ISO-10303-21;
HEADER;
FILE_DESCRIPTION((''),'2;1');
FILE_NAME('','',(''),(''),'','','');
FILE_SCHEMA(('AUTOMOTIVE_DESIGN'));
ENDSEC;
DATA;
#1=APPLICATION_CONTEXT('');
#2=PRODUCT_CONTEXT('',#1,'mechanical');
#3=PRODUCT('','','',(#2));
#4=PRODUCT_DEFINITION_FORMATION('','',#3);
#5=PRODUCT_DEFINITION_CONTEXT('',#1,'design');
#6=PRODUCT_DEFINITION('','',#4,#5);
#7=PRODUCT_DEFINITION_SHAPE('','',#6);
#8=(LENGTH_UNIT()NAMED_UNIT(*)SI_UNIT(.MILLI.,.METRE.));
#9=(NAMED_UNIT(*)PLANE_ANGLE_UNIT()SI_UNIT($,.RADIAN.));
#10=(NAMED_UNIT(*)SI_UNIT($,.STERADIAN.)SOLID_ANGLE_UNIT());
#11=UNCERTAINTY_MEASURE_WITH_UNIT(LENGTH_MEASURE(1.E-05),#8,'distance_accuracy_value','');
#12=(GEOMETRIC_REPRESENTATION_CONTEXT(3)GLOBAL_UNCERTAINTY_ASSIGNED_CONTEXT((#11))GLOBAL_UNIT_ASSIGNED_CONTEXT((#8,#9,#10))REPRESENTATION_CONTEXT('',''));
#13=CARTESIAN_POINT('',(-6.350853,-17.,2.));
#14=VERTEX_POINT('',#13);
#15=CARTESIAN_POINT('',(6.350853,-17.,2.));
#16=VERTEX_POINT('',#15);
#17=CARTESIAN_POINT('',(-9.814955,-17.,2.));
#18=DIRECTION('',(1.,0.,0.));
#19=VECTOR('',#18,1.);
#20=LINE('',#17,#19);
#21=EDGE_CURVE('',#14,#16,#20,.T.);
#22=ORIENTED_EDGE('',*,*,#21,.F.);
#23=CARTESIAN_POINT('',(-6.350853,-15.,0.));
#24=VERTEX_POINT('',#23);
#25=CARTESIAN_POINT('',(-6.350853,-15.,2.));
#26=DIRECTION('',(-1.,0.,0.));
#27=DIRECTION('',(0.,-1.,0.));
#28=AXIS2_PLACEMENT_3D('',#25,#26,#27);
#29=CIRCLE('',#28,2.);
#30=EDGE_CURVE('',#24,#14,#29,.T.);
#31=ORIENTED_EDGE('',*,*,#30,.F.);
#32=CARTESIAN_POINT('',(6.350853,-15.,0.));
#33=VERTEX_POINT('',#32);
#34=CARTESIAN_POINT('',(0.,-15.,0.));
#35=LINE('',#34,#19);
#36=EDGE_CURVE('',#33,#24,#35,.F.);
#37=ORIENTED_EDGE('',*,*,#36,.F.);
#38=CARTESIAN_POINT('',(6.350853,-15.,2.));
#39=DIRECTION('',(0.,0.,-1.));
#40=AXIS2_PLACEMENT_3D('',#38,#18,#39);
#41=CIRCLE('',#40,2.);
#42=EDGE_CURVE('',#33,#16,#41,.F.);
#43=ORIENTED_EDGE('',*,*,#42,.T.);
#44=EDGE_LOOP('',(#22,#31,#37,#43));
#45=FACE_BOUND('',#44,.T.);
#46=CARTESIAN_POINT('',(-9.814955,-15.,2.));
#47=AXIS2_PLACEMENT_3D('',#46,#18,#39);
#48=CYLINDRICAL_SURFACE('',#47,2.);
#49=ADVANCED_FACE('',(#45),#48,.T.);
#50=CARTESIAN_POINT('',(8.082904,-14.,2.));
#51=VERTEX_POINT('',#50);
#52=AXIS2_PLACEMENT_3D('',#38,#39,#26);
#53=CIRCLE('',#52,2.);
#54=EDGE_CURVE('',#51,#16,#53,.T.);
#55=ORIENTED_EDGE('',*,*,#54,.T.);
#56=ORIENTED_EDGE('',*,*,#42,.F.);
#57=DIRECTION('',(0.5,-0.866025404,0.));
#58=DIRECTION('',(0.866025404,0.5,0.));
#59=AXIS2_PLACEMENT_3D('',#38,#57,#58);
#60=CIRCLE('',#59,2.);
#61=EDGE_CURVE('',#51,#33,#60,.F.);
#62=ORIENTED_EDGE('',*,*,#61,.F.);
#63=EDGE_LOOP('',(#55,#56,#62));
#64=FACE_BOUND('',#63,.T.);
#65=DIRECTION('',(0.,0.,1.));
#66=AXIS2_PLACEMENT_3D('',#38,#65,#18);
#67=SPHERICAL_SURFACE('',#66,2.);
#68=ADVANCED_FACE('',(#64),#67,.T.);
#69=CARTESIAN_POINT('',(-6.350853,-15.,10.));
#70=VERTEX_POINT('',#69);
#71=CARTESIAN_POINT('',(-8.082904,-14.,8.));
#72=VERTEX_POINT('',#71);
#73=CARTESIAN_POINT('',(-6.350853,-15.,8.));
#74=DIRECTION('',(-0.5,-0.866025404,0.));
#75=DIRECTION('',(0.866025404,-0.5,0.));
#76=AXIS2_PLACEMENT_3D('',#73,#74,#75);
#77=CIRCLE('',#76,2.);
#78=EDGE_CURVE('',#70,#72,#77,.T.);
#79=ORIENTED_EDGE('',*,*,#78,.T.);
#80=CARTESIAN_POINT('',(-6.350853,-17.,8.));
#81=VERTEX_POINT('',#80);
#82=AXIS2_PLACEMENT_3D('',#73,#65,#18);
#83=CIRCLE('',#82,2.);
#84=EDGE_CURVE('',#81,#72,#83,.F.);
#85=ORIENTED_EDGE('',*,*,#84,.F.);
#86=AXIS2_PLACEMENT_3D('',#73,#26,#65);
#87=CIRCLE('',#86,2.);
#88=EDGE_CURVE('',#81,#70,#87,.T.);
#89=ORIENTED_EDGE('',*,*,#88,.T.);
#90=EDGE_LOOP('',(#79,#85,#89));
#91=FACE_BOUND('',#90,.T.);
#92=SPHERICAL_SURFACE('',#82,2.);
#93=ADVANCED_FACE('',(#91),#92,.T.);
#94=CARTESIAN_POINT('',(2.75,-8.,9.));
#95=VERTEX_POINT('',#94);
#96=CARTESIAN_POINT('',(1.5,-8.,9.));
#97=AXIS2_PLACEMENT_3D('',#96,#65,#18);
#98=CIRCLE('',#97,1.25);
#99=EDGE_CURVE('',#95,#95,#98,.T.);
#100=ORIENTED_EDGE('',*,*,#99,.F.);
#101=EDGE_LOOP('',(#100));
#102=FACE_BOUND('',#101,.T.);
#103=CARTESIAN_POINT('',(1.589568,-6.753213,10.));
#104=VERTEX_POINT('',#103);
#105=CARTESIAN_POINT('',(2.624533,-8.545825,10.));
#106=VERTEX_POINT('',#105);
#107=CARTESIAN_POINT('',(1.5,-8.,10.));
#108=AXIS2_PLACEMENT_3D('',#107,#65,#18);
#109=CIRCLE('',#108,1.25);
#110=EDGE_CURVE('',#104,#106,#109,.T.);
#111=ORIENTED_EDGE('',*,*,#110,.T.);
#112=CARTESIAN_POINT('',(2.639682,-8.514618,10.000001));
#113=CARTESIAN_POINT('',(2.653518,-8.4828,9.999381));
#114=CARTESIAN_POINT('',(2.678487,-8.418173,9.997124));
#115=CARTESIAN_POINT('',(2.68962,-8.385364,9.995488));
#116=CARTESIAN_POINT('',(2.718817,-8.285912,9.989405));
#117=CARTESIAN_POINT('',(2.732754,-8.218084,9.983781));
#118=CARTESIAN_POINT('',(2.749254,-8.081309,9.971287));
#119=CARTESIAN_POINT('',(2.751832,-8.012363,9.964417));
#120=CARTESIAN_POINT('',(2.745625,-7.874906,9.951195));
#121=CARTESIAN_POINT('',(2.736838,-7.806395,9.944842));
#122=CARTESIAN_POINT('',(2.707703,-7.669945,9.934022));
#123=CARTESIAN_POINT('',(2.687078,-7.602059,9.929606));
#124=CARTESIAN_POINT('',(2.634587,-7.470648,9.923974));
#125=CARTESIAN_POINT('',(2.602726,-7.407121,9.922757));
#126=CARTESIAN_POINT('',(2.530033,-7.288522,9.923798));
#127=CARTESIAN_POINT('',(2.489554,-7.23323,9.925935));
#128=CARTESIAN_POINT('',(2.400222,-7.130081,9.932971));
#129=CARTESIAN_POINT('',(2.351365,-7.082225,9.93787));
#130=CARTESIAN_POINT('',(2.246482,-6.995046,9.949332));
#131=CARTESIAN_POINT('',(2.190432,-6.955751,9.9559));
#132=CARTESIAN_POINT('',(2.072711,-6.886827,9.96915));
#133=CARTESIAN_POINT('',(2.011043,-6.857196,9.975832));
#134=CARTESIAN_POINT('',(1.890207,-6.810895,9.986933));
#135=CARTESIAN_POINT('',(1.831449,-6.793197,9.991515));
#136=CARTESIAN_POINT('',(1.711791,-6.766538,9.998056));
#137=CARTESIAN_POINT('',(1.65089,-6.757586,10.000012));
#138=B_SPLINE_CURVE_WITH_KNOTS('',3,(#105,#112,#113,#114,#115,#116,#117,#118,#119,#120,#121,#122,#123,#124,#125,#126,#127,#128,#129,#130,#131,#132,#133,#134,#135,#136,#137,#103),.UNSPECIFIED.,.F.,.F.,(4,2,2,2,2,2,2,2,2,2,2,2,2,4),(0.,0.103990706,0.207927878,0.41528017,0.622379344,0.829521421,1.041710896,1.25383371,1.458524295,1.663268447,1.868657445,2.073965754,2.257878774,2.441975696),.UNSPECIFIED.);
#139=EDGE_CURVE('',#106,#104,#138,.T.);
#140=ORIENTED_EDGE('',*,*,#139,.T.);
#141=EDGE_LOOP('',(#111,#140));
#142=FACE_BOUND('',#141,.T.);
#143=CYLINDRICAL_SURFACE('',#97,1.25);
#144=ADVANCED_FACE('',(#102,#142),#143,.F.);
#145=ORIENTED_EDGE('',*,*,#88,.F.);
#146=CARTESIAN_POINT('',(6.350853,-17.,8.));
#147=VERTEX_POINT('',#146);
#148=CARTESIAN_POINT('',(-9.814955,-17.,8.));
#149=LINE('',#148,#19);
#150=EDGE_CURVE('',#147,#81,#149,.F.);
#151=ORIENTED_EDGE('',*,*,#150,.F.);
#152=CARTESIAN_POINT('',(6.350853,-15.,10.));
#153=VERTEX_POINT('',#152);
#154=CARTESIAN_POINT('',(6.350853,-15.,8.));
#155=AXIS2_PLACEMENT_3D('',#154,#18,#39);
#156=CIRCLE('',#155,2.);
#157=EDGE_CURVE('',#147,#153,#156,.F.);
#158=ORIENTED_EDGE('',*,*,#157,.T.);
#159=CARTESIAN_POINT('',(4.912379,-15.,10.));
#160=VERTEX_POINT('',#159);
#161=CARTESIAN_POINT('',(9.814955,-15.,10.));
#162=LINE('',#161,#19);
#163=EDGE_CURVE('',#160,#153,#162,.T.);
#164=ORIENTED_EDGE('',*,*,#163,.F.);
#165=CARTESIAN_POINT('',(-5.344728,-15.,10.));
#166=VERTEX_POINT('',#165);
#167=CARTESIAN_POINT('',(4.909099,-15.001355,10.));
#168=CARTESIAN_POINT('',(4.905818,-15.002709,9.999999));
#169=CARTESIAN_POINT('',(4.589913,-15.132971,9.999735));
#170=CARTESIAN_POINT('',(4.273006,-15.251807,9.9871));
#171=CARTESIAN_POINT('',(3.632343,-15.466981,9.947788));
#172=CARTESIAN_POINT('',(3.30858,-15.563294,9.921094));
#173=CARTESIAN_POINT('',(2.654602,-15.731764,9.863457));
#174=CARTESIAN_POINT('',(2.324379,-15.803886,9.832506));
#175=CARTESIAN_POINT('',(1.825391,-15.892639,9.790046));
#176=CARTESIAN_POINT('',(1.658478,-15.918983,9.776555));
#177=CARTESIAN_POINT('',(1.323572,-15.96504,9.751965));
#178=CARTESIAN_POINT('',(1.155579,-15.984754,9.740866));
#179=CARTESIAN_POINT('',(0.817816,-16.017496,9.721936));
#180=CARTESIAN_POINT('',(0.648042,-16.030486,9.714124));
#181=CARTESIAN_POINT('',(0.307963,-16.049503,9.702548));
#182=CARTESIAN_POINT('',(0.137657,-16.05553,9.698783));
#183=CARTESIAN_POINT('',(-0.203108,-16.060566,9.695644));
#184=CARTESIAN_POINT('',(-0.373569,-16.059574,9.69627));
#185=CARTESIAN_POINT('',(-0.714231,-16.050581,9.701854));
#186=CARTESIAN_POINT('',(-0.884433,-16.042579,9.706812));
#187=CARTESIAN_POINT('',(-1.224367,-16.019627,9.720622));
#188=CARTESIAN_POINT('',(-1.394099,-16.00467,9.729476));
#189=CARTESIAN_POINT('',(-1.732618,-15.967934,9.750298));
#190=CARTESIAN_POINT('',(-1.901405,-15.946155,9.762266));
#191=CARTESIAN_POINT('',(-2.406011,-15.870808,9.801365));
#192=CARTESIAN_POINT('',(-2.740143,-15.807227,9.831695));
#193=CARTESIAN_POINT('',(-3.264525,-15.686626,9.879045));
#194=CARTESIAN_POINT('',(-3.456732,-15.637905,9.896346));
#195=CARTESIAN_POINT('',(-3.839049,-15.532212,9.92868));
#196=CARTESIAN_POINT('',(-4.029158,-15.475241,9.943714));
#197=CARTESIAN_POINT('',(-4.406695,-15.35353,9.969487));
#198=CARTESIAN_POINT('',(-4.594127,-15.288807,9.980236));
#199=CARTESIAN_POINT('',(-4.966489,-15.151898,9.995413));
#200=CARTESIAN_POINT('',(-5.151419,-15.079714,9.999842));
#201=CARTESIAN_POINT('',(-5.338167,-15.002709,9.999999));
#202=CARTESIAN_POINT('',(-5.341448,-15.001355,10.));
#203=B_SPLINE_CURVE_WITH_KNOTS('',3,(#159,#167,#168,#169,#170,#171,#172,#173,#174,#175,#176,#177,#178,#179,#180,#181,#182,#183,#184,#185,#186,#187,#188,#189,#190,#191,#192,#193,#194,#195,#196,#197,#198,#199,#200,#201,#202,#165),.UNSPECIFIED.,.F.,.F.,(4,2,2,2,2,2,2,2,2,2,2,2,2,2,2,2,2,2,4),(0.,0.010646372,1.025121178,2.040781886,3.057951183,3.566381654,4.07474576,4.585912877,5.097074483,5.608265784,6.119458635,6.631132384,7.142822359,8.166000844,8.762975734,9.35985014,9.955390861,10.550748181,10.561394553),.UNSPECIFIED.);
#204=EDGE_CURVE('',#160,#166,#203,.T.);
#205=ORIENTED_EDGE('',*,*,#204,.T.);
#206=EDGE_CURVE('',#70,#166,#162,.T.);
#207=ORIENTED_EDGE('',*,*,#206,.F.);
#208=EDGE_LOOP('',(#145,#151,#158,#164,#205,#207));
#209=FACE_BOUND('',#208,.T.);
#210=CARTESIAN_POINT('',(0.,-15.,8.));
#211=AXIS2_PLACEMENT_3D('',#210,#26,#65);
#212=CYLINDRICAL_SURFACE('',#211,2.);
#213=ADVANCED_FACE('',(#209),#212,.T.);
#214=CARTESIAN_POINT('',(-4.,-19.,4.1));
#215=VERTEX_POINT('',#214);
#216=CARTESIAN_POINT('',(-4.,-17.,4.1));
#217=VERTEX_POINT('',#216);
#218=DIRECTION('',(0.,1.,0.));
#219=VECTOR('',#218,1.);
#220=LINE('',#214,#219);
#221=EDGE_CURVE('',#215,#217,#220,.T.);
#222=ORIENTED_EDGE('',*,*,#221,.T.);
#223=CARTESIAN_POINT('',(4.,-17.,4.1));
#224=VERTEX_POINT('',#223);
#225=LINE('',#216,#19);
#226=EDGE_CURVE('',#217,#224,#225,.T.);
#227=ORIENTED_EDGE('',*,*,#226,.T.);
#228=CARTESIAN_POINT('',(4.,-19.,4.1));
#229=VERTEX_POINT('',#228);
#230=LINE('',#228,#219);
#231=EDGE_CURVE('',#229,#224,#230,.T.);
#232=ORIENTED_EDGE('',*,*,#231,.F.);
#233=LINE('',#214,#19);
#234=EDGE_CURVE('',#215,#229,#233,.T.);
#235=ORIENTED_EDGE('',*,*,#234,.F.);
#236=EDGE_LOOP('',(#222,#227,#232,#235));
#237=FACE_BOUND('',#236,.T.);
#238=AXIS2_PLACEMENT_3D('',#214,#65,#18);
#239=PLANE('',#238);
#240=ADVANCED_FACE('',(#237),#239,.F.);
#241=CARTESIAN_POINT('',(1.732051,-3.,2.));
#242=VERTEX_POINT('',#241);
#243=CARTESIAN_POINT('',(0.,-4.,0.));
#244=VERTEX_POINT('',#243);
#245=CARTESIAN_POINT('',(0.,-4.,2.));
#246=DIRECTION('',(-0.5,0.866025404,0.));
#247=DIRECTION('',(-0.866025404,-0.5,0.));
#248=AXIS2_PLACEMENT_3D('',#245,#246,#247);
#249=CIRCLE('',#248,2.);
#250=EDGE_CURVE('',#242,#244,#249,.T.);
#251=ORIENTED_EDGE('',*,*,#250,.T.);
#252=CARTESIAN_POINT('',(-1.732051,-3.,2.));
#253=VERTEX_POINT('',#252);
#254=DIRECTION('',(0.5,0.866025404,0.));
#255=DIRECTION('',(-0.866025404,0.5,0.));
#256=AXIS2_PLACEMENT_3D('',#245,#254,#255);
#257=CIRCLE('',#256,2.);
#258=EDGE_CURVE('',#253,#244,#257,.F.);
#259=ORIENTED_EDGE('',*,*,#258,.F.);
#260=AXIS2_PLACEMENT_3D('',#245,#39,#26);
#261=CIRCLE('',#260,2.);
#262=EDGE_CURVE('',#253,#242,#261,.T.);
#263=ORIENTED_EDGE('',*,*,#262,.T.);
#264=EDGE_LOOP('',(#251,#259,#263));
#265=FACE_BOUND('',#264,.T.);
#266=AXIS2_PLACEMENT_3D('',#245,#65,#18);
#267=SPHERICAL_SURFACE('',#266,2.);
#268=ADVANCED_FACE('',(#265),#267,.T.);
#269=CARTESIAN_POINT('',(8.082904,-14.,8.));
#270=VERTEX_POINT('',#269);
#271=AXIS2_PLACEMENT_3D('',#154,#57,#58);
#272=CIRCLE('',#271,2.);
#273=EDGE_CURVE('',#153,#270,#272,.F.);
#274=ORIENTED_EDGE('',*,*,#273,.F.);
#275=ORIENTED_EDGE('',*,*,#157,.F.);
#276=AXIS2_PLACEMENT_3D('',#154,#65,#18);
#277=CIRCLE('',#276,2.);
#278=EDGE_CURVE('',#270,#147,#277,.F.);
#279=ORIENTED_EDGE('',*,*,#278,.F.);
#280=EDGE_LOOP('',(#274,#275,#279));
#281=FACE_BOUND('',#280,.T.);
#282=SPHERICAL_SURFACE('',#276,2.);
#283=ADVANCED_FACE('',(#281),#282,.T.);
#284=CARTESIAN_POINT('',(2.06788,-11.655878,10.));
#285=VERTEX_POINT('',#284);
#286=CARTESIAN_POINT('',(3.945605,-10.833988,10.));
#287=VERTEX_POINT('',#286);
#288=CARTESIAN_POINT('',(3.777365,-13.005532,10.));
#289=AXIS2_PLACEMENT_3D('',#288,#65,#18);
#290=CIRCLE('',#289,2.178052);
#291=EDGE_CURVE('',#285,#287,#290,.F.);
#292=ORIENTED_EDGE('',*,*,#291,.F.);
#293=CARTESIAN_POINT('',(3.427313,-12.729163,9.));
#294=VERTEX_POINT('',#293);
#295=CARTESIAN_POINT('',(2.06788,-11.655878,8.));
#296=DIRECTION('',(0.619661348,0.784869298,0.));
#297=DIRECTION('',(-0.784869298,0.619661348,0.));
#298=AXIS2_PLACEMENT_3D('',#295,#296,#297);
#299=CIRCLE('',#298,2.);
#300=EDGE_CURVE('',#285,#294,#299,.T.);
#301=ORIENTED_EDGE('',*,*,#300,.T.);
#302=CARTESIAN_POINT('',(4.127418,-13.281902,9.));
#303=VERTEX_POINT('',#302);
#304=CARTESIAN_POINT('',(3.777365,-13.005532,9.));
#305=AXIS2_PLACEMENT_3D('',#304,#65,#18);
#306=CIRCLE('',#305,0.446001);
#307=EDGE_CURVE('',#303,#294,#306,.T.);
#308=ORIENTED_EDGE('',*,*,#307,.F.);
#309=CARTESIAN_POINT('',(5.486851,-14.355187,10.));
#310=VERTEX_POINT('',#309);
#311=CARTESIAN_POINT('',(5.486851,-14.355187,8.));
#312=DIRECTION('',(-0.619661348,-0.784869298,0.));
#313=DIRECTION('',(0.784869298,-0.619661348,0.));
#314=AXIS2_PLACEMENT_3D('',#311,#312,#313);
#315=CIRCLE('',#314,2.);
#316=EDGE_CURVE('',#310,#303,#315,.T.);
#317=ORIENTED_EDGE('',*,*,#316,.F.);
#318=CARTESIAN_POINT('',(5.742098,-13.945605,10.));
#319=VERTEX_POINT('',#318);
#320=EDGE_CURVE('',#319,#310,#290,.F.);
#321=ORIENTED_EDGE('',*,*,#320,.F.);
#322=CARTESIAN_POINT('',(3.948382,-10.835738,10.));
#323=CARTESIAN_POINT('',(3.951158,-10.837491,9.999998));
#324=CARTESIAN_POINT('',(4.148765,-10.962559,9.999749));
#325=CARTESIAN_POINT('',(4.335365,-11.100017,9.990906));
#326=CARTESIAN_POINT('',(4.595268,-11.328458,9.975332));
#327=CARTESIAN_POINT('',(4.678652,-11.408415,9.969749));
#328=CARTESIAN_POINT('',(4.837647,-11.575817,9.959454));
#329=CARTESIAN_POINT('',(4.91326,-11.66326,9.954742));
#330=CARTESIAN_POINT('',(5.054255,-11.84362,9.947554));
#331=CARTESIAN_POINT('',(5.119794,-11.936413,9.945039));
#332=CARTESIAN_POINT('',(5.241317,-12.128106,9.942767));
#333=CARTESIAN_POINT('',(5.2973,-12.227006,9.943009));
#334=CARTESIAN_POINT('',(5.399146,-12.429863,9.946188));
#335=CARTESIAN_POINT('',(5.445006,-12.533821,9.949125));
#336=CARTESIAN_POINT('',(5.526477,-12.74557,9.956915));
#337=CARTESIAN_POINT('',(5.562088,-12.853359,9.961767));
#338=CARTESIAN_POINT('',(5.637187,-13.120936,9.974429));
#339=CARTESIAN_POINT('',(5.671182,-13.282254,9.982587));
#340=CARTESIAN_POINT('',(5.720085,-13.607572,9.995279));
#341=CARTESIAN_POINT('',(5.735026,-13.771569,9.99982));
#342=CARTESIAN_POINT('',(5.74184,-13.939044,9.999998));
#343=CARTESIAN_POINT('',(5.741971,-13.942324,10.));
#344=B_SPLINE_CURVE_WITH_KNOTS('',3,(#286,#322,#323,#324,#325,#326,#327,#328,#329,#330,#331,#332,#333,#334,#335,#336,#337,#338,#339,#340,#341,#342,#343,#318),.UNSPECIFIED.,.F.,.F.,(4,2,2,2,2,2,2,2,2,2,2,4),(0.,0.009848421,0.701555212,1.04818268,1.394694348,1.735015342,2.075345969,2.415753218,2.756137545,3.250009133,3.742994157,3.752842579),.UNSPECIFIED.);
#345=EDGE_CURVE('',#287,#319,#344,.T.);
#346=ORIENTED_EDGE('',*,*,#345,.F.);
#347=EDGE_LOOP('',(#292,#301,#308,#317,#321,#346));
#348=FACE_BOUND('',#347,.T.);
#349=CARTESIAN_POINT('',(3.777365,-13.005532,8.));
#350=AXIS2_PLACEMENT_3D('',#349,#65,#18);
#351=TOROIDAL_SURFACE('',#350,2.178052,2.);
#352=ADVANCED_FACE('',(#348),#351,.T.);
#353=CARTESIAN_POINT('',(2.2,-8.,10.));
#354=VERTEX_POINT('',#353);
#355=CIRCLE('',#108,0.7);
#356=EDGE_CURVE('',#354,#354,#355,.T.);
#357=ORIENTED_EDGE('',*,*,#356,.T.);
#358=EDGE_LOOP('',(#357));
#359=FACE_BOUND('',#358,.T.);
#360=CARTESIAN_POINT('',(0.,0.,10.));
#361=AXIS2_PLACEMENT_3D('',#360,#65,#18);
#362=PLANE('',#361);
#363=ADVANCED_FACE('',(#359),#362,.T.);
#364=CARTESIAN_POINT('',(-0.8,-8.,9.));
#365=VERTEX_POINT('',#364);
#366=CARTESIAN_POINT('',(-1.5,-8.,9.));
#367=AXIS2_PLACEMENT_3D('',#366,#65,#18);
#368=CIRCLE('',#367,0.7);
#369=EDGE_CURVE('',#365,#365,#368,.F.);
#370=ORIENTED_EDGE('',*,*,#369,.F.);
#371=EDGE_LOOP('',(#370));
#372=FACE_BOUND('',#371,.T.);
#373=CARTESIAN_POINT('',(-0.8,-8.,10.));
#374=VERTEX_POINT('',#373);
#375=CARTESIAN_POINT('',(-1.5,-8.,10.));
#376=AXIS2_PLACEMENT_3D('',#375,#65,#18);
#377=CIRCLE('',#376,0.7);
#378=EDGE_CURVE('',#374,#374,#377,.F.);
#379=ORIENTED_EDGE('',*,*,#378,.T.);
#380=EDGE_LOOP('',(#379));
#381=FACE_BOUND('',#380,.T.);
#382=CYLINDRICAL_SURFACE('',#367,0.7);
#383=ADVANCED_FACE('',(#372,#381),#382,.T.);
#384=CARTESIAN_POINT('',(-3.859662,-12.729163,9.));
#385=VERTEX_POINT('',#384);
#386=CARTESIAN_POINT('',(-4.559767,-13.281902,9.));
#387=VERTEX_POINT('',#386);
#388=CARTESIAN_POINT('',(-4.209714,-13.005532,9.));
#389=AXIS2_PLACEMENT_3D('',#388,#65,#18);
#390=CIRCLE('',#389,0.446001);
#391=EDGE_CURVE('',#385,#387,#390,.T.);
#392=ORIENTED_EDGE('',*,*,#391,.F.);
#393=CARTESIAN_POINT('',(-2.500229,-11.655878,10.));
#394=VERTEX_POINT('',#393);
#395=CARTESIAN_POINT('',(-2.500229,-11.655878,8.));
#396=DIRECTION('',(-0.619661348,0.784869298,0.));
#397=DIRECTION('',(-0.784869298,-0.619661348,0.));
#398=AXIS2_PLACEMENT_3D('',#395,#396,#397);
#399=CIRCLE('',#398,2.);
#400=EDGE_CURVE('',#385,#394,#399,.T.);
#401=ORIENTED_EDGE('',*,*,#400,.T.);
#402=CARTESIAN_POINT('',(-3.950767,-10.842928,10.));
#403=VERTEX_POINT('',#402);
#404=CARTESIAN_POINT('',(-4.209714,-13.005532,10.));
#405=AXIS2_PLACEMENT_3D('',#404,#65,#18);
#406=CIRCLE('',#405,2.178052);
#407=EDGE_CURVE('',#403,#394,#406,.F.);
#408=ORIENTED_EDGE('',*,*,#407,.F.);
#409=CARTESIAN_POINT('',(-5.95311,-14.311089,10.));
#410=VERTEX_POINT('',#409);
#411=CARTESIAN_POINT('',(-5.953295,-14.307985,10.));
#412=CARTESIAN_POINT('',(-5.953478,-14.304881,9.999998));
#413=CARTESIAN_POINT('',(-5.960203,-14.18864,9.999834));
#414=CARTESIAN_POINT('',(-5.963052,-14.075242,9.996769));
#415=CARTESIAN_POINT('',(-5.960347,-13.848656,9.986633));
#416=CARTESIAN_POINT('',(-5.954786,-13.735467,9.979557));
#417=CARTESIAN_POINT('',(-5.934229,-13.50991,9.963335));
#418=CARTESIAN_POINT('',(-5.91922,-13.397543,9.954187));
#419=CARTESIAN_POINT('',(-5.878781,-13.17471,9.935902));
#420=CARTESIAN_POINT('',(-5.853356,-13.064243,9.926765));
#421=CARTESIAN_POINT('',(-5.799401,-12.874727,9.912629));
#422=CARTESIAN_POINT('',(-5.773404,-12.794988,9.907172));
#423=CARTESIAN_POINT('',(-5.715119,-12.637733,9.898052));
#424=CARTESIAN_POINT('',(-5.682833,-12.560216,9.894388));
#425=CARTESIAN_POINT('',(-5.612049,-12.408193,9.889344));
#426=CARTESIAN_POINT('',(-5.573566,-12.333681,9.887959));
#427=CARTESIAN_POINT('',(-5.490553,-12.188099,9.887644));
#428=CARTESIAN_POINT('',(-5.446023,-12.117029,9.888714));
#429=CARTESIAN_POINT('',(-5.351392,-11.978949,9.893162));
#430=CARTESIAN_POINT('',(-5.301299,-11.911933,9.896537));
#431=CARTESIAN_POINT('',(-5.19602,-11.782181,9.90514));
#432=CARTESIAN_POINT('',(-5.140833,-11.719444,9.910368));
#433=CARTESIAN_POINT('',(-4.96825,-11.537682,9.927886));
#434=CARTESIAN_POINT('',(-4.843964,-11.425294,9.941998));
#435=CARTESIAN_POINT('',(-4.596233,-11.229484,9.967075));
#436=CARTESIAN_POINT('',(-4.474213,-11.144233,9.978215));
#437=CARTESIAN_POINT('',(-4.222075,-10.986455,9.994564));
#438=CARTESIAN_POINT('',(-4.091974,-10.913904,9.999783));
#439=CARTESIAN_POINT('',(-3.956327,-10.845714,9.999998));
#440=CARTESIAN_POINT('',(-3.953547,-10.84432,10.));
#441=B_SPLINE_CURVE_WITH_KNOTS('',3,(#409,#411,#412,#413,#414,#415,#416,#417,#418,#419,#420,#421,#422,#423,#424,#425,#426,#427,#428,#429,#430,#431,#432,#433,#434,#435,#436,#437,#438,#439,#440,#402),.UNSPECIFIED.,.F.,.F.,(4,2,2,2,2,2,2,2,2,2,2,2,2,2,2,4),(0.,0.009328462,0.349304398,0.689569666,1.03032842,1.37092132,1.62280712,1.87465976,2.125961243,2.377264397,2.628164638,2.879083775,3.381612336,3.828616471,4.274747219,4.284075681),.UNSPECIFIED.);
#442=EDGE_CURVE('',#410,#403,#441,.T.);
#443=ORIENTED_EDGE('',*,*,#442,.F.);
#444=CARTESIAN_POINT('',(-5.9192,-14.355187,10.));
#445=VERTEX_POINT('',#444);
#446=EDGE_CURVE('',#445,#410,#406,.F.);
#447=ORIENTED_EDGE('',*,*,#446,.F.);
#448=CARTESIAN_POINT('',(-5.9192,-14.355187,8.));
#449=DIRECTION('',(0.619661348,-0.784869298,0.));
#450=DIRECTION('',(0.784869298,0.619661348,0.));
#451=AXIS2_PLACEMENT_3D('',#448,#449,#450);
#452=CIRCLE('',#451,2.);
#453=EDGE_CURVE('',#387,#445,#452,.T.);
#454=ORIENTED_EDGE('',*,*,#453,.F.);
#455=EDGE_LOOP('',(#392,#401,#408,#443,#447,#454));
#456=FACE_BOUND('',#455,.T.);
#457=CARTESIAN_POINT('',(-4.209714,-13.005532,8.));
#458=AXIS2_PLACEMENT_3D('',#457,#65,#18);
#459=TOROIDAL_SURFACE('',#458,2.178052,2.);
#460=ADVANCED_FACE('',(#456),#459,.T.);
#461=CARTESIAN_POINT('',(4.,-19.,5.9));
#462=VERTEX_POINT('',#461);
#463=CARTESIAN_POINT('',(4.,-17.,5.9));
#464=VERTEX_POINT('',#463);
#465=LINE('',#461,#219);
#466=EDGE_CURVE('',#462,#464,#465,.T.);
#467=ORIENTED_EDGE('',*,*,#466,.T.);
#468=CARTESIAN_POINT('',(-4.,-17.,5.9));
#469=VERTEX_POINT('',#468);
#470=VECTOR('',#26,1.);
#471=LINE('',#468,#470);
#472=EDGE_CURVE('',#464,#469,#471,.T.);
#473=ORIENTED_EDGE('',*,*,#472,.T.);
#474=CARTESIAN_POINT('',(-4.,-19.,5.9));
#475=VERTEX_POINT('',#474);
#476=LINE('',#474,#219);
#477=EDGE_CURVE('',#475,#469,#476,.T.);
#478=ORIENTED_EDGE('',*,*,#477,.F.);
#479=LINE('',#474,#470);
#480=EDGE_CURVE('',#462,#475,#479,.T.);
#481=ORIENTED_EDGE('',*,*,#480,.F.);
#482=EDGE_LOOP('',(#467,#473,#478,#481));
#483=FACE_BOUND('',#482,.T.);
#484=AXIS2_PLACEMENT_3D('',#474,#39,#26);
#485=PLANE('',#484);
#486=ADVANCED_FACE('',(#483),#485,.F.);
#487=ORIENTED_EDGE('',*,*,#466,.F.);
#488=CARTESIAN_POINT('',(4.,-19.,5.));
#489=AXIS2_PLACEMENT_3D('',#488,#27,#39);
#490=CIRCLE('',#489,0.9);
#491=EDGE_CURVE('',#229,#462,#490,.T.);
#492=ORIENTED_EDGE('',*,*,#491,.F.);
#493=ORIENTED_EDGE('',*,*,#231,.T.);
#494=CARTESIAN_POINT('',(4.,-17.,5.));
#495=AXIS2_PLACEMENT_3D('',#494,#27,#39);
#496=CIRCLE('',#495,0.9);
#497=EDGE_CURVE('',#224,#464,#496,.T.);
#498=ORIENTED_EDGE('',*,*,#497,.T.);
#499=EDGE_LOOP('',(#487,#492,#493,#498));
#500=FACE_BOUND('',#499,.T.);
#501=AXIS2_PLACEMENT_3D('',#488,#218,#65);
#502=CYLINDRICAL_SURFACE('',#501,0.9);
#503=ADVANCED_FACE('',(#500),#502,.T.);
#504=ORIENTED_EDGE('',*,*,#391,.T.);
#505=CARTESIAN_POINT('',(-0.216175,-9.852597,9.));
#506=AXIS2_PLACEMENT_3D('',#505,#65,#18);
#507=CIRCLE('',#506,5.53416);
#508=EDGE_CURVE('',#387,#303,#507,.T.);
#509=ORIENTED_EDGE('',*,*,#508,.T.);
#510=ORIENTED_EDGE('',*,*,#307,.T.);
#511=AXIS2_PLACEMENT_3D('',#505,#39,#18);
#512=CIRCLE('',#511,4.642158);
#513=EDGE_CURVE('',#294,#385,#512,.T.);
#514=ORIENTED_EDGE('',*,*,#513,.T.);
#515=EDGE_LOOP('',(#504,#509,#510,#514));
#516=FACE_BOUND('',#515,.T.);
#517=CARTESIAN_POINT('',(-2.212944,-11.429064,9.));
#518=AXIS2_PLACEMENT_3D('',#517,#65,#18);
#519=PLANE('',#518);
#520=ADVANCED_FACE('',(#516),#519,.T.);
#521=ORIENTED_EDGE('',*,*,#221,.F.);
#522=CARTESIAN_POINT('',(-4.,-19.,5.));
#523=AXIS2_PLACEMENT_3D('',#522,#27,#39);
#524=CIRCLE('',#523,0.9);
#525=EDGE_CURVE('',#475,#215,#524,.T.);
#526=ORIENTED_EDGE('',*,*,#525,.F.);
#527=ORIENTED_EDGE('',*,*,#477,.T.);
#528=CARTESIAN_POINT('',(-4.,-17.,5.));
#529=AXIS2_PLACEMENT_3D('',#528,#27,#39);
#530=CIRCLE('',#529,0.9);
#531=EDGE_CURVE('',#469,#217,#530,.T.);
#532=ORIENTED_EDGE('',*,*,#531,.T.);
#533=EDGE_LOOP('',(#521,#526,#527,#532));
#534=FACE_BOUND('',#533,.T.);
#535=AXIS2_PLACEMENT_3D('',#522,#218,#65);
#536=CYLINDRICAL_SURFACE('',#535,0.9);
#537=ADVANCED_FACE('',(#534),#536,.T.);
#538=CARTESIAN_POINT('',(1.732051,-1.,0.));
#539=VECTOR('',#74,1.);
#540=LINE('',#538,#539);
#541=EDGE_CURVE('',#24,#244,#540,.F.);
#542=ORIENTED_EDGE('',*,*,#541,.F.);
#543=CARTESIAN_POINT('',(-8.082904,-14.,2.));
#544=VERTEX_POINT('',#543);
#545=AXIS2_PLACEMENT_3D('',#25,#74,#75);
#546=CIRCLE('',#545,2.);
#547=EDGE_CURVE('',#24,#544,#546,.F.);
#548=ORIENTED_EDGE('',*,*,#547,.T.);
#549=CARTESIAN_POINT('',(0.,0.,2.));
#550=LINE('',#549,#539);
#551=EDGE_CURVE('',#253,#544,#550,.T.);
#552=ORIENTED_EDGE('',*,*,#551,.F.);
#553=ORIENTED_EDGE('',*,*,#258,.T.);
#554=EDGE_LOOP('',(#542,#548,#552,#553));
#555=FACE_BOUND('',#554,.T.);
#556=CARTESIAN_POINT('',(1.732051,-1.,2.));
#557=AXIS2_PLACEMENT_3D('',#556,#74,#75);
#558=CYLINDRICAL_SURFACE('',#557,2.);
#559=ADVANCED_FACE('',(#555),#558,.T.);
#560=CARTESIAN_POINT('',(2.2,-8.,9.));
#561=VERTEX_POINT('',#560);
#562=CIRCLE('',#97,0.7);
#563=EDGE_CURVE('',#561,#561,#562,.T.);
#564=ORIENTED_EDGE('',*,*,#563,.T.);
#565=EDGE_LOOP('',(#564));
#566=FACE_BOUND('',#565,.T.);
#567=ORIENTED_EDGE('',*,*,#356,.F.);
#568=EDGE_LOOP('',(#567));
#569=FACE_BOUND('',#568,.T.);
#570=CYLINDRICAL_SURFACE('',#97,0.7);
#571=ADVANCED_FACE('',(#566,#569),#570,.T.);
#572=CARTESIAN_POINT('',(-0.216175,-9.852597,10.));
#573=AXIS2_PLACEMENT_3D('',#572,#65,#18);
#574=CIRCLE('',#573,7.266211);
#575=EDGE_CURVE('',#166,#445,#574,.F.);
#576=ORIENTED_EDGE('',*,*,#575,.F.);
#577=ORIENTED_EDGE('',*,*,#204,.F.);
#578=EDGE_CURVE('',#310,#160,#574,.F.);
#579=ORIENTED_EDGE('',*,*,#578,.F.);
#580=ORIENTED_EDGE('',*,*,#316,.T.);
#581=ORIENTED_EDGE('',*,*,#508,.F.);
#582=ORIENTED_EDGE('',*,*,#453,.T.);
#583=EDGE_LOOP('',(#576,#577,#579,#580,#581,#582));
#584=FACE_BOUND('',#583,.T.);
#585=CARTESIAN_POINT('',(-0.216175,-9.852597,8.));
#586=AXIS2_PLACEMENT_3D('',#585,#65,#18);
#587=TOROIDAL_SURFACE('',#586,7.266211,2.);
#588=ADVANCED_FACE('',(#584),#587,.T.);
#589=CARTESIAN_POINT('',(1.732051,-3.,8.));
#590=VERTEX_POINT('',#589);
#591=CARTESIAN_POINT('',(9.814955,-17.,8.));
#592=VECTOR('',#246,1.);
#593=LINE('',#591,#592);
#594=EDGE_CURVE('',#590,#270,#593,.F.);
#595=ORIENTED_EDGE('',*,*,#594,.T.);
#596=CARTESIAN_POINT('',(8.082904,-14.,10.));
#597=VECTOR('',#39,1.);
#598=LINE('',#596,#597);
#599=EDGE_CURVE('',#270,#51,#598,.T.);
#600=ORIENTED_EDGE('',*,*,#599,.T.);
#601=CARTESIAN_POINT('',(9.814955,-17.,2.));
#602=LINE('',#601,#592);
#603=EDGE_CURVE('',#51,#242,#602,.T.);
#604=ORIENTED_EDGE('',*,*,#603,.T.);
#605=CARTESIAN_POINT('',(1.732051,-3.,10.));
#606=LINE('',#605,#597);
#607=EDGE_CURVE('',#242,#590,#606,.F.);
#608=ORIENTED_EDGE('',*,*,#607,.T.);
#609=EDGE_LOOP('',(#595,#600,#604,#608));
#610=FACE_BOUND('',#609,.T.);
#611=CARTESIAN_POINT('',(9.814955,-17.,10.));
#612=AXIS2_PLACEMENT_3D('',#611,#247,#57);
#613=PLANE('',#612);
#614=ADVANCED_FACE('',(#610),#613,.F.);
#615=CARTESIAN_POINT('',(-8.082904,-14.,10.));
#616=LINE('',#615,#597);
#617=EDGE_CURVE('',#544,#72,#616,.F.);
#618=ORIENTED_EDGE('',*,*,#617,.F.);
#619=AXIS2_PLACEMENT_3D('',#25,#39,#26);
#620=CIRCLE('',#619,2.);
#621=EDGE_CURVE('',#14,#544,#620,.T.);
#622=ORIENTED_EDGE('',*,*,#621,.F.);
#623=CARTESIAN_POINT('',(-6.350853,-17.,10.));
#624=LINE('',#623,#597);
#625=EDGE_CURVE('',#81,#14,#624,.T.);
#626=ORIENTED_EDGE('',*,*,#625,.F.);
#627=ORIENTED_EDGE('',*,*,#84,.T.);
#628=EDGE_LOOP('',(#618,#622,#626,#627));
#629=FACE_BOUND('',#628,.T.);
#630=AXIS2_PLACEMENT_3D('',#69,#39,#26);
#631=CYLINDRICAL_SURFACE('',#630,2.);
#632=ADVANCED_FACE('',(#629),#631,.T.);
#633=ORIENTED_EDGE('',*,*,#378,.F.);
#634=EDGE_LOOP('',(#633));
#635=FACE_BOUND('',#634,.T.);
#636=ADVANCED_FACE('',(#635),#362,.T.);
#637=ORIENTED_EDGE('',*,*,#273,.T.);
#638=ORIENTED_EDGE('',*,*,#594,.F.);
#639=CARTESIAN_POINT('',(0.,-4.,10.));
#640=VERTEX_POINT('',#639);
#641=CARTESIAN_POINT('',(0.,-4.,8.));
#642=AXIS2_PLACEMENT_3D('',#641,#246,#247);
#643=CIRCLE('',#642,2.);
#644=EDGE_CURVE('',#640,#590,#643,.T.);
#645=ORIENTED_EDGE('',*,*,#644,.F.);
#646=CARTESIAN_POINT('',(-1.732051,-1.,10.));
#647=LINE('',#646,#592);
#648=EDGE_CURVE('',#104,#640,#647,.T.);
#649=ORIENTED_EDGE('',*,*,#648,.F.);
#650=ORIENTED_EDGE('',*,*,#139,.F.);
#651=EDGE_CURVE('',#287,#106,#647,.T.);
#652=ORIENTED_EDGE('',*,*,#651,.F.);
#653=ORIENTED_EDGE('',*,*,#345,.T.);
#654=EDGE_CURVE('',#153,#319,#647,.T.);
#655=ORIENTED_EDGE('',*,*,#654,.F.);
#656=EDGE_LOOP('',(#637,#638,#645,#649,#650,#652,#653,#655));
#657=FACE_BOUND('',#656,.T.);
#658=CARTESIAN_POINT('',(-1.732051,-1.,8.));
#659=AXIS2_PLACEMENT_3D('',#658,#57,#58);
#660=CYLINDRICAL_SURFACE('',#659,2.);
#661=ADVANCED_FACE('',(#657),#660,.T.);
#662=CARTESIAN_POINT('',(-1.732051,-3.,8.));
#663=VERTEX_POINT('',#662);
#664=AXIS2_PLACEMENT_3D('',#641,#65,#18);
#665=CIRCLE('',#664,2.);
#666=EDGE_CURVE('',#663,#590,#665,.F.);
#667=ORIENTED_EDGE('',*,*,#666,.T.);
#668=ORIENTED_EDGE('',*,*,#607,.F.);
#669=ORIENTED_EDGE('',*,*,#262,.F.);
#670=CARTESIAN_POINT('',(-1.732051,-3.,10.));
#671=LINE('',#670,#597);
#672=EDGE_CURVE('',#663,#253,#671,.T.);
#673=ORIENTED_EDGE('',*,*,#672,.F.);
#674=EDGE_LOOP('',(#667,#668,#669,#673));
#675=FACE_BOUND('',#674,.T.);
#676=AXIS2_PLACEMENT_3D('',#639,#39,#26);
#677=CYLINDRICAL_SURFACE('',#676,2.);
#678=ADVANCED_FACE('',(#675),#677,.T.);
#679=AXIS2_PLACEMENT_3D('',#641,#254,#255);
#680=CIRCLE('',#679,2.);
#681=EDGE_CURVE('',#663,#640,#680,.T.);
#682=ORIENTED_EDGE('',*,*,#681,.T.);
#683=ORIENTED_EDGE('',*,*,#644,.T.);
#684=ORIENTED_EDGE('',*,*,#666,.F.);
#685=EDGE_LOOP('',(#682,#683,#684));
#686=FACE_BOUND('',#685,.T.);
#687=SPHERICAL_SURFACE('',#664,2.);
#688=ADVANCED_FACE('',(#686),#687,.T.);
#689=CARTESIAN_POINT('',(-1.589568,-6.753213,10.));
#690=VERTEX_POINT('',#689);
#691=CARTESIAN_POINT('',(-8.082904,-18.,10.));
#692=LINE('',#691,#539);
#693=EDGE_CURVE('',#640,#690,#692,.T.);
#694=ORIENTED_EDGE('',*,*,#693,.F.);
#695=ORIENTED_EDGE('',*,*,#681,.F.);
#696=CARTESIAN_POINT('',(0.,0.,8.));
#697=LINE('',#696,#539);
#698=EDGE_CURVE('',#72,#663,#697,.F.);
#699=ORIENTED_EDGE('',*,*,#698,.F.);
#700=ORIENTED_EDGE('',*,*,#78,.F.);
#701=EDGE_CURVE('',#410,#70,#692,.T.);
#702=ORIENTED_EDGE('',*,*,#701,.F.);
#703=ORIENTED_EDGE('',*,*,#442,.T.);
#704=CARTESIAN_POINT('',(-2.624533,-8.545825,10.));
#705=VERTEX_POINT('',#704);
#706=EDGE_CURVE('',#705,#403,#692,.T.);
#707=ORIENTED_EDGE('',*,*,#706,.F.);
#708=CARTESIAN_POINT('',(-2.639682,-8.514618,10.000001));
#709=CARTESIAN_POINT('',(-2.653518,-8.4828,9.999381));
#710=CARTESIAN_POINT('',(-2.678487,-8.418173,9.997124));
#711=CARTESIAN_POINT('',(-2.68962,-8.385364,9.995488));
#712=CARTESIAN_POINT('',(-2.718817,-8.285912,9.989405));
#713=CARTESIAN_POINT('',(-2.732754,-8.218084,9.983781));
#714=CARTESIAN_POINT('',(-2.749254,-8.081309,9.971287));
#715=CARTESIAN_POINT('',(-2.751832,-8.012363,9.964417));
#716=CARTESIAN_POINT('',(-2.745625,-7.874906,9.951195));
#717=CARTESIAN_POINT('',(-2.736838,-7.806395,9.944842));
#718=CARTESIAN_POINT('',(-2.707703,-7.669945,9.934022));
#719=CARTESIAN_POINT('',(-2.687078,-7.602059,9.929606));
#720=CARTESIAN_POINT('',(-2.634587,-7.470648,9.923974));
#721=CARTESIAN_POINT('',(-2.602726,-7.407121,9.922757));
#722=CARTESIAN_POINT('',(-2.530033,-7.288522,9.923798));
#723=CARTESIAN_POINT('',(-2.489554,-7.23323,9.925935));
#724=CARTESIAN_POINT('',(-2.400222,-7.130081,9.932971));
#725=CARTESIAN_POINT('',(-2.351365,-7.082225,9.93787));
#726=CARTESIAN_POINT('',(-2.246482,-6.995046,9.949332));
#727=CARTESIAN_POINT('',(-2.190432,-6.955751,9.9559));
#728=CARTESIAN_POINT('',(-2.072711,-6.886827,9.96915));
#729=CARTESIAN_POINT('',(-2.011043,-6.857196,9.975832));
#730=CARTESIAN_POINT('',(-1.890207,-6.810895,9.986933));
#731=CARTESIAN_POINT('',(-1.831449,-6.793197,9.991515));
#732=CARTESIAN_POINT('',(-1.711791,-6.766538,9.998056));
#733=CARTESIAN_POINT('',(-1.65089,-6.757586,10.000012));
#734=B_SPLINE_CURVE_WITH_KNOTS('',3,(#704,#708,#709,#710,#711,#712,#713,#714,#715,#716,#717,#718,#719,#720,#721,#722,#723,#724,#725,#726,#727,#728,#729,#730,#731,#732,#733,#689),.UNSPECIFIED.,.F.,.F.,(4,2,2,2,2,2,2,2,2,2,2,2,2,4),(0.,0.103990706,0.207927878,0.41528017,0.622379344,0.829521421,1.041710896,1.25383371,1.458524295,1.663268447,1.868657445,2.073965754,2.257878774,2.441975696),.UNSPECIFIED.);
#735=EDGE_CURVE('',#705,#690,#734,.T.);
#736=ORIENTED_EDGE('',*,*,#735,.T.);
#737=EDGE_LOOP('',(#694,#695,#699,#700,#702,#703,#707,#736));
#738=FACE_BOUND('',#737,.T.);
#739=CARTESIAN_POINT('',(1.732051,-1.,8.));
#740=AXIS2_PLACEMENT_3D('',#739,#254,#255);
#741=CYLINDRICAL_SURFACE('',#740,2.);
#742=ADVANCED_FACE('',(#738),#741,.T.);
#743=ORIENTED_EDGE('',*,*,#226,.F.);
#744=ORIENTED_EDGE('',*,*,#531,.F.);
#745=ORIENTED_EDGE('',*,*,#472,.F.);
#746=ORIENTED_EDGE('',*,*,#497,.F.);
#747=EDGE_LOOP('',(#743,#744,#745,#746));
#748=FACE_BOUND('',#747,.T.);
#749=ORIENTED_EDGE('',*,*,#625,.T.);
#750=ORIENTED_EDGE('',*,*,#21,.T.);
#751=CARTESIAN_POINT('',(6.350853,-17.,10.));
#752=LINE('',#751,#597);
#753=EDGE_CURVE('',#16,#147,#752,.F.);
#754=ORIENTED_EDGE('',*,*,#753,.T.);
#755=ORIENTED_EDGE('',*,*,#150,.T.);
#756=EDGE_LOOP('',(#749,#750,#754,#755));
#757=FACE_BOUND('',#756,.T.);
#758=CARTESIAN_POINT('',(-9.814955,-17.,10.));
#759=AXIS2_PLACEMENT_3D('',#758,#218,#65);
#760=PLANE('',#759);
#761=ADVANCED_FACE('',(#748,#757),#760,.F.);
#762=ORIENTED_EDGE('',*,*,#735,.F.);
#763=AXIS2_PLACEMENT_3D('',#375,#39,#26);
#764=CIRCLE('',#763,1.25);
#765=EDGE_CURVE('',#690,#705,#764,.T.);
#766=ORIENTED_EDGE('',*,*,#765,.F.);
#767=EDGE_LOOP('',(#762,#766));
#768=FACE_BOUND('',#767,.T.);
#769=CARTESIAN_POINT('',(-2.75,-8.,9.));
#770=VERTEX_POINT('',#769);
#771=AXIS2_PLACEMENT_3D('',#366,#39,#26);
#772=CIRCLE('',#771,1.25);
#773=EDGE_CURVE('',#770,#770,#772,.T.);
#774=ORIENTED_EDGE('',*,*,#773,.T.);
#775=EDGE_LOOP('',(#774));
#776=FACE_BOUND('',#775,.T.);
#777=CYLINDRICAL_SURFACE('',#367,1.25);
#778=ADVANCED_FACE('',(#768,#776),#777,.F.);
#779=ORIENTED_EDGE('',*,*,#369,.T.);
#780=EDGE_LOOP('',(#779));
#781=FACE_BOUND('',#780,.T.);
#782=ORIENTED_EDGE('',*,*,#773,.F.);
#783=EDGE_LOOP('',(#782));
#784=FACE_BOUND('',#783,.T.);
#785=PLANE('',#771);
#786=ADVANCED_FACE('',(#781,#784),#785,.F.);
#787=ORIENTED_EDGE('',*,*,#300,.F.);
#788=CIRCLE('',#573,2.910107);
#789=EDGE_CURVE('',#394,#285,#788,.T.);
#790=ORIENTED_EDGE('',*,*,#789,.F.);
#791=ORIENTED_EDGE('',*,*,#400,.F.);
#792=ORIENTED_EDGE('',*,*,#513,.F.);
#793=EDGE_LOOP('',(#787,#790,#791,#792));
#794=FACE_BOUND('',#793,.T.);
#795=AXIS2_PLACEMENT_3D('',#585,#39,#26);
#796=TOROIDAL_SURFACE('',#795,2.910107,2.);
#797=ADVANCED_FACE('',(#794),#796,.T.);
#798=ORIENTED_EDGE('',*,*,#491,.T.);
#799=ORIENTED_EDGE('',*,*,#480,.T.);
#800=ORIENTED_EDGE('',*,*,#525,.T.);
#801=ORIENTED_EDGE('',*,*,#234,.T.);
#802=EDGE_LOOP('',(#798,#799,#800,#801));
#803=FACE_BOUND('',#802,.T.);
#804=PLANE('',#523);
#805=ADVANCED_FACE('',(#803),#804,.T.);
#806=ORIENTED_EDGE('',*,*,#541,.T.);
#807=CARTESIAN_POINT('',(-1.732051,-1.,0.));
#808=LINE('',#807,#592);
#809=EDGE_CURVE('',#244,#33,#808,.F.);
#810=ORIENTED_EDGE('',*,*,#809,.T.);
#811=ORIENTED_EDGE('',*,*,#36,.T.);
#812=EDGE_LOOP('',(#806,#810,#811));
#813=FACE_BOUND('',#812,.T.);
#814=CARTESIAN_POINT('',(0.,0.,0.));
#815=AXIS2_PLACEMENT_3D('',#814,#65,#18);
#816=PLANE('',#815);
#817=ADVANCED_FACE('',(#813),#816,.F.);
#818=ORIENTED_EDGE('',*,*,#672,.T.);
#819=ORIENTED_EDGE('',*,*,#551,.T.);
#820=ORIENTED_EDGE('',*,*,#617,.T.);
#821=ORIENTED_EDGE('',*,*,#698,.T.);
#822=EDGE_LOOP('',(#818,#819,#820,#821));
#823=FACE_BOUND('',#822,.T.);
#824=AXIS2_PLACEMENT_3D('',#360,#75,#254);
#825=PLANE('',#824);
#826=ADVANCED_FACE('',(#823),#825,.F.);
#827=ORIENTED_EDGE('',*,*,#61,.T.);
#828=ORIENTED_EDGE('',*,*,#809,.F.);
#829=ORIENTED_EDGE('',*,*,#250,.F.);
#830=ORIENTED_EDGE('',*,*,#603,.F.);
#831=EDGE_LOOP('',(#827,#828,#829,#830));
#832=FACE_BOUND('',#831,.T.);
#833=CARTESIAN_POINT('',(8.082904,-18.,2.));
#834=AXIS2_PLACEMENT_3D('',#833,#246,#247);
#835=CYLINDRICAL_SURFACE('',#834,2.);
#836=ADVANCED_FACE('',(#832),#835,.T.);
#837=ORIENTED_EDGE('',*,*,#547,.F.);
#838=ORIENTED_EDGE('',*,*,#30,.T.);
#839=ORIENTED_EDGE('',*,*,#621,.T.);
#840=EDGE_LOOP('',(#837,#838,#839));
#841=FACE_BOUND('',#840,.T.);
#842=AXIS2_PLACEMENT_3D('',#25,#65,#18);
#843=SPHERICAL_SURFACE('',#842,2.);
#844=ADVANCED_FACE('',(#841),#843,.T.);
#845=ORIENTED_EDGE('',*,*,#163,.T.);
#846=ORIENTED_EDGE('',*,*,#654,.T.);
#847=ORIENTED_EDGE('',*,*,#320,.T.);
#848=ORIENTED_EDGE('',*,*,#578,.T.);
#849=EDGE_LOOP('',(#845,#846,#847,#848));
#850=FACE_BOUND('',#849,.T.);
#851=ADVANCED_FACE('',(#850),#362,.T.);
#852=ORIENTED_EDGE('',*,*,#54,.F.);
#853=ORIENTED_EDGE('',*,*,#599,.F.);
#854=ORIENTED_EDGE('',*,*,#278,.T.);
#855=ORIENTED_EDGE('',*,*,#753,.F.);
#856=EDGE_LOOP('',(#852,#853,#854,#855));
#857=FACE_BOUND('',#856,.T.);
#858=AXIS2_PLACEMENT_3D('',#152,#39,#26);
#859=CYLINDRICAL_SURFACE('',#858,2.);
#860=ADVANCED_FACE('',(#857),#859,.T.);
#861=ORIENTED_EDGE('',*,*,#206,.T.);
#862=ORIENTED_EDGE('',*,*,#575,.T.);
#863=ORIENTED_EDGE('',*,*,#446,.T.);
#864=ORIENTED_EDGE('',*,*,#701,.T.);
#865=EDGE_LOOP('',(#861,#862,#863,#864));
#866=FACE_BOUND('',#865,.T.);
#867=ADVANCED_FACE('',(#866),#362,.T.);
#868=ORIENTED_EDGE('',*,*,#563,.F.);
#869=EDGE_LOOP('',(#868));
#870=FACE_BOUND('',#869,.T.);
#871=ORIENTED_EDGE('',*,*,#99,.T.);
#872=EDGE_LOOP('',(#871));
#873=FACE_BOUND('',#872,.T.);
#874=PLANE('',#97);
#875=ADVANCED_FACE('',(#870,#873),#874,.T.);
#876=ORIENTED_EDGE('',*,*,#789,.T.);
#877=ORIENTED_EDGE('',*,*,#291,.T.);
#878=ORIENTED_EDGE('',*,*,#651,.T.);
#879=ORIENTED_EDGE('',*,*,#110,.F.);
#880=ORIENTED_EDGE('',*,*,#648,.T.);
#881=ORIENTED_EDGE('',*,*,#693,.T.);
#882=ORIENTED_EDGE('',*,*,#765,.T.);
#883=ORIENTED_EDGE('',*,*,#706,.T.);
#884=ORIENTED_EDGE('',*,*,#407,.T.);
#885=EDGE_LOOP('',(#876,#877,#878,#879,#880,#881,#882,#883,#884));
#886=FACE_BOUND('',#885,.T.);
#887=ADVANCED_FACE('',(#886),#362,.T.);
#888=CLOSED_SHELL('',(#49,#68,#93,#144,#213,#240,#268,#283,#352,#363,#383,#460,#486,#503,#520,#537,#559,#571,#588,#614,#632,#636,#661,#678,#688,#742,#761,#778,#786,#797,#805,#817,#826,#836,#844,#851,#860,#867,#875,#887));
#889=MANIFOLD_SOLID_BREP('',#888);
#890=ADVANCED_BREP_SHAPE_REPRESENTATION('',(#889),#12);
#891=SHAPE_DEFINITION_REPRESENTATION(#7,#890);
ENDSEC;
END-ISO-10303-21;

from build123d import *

# Parameters (mm, degrees)
BOSS_EXTRUDE1_DEPTH = 10
CUT_EXTRUDE1_DEPTH  = 1
FILLET1_R           = 2
SKETCH3_R           = 1.25
SKETCH3_R_2         = 0.7
CUT_EXTRUDE2_DEPTH  = 1
BOSS_EXTRUDE2_DEPTH = 2


with BuildPart() as part:
    # Sketch1 → Boss-Extrude1 (new body)
    with BuildSketch(Plane.XY):
        Polygon((-9.814954576, -17), (9.814954576, -17), (0, 0), align=None)
    extrude(amount=BOSS_EXTRUDE1_DEPTH)

    # Sketch2 → Cut-Extrude1 (cut)
    with BuildSketch(Plane.XY.offset(10)):
        with BuildLine():
            ThreePointArc((-4.55976672, -13.28190161), (-0.216174522, -15.38675653), (4.127417675, -13.28190161))
            ThreePointArc((4.127417675, -13.28190161), (4.053734797, -12.655479816), (3.427313004, -12.729162694))
            ThreePointArc((3.427313004, -12.729162694), (-0.216174522, -14.494754927), (-3.859662049, -12.729162694))
            ThreePointArc((-3.859662049, -12.729162694), (-4.486083842, -12.655479816), (-4.55976672, -13.28190161))
        make_face()
    extrude(amount=-CUT_EXTRUDE1_DEPTH, mode=Mode.SUBTRACT)

    # Fillet1
    # the kernel refuses this fillet: 2 mm, written as the material it takes off along each edge
    with BuildSketch(Plane(origin=(6.350852961, -15, 2), x_dir=(0, -1, 0), z_dir=(0, 0, -1))) as fillet1_piece_1_section:
        Polygon((0, 0), (FILLET1_R * 1.02, 0), (FILLET1_R * 1.02, -FILLET1_R * 1.76669182372), (-FILLET1_R * 0.51, -FILLET1_R * 0.88334591186), align=None)
    fillet1_piece_1 = extrude(amount=FILLET1_R * 1.02, mode=Mode.PRIVATE)
    fillet1_piece_1 = fillet1_piece_1 - Plane(origin=(6.350852961, -15, 2), x_dir=(-0.8660254037844387, 0.4999999999999999, 0), z_dir=(0, 0, -1)) * Sphere(FILLET1_R, mode=Mode.PRIVATE)
    add(fillet1_piece_1, mode=Mode.SUBTRACT)
    with BuildSketch(Plane(origin=(6.350852961, -15, 8), x_dir=(0, -1, 0), z_dir=(0, 0, 1))) as fillet1_piece_2_section:
        Polygon((0, 0), (FILLET1_R * 1.02, 0), (FILLET1_R * 1.02, FILLET1_R * 1.76669182372), (-FILLET1_R * 0.51, FILLET1_R * 0.88334591186), align=None)
    fillet1_piece_2 = extrude(amount=FILLET1_R * 1.02, mode=Mode.PRIVATE)
    fillet1_piece_2 = fillet1_piece_2 - Plane(origin=(6.350852961, -15, 8), x_dir=(-0.8660254037844387, 0.4999999999999999, 0), z_dir=(0, 0, 1)) * Sphere(FILLET1_R, mode=Mode.PRIVATE)
    add(fillet1_piece_2, mode=Mode.SUBTRACT)
    with BuildSketch(Plane(origin=(0, -4, 2), x_dir=(-0.8660254037844387, 0.5000000000000001, 0), z_dir=(0, 0, -1))) as fillet1_piece_3_section:
        Polygon((0, 0), (FILLET1_R * 1.02, 0), (FILLET1_R * 1.02, FILLET1_R * 1.76669182372), (-FILLET1_R * 0.51, FILLET1_R * 0.88334591186), align=None)
    fillet1_piece_3 = extrude(amount=FILLET1_R * 1.02, mode=Mode.PRIVATE)
    fillet1_piece_3 = fillet1_piece_3 - Plane(origin=(0, -4, 2), x_dir=(0, -1, 0), z_dir=(0, 0, -1)) * Sphere(FILLET1_R, mode=Mode.PRIVATE)
    add(fillet1_piece_3, mode=Mode.SUBTRACT)
    with BuildSketch(Plane(origin=(0, -4, 8), x_dir=(-0.8660254037844387, 0.5000000000000001, 0), z_dir=(0, 0, 1))) as fillet1_piece_4_section:
        Polygon((0, 0), (FILLET1_R * 1.02, 0), (FILLET1_R * 1.02, -FILLET1_R * 1.76669182372), (-FILLET1_R * 0.51, -FILLET1_R * 0.88334591186), align=None)
    fillet1_piece_4 = extrude(amount=FILLET1_R * 1.02, mode=Mode.PRIVATE)
    fillet1_piece_4 = fillet1_piece_4 - Plane(origin=(0, -4, 8), x_dir=(0, -1, 0), z_dir=(0, 0, 1)) * Sphere(FILLET1_R, mode=Mode.PRIVATE)
    add(fillet1_piece_4, mode=Mode.SUBTRACT)
    with BuildSketch(Plane(origin=(-6.350852961, -15, 8), x_dir=(0, -1, 0), z_dir=(0, 0, 1))) as fillet1_piece_5_section:
        Polygon((0, 0), (FILLET1_R * 1.02, 0), (FILLET1_R * 1.02, -FILLET1_R * 1.76669182372), (-FILLET1_R * 0.51, -FILLET1_R * 0.88334591186), align=None)
    fillet1_piece_5 = extrude(amount=FILLET1_R * 1.02, mode=Mode.PRIVATE)
    fillet1_piece_5 = fillet1_piece_5 - Plane(origin=(-6.350852961, -15, 8), x_dir=(0.8660254037844387, 0.4999999999999999, 0), z_dir=(0, 0, 1)) * Sphere(FILLET1_R, mode=Mode.PRIVATE)
    add(fillet1_piece_5, mode=Mode.SUBTRACT)
    with BuildSketch(Plane(origin=(-6.350852961, -15, 2), x_dir=(0, -1, 0), z_dir=(0, 0, -1))) as fillet1_piece_6_section:
        Polygon((0, 0), (FILLET1_R * 1.02, 0), (FILLET1_R * 1.02, FILLET1_R * 1.76669182372), (-FILLET1_R * 0.51, FILLET1_R * 0.88334591186), align=None)
    fillet1_piece_6 = extrude(amount=FILLET1_R * 1.02, mode=Mode.PRIVATE)
    fillet1_piece_6 = fillet1_piece_6 - Plane(origin=(-6.350852961, -15, 2), x_dir=(0.8660254037844387, 0.4999999999999999, 0), z_dir=(0, 0, -1)) * Sphere(FILLET1_R, mode=Mode.PRIVATE)
    add(fillet1_piece_6, mode=Mode.SUBTRACT)
    with BuildSketch(Plane(origin=(9.814954576, -17, 2), x_dir=(-1, 0, 0), z_dir=(0, 0, 1))) as fillet1_piece_7:
        with BuildLine():
            CenterArc((FILLET1_R * 1.73205080757, -FILLET1_R), FILLET1_R, 90, 120)
            Line((FILLET1_R * 0.866025403784, -FILLET1_R * 1.5), (0, 0))
            Line((0, 0), (FILLET1_R * 1.73205080757, 0))
        make_face()
    extrude(amount=6, mode=Mode.SUBTRACT)
    with BuildSketch(Plane(origin=(0, 0, 2), x_dir=(-0.5000000000000001, -0.8660254037844386, 0), z_dir=(0, 0, 1)), Plane(origin=(-9.814954576, -17, 2), x_dir=(1, 0, 0), z_dir=(0, 0, 1))) as fillet1_piece_8:
        with BuildLine():
            CenterArc((FILLET1_R * 1.73205080757, FILLET1_R), FILLET1_R, 150, 120)
            Line((FILLET1_R * 0.866025403784, FILLET1_R * 1.5), (0, 0))
            Line((0, 0), (FILLET1_R * 1.73205080757, 0))
        make_face()
    extrude(amount=6, mode=Mode.SUBTRACT)
    with BuildSketch(Plane(origin=(8.082903769, -14, 0), x_dir=(0, 0, 1), z_dir=(-0.5000000000000001, 0.8660254037844387, 0)), Plane(origin=(-1.732050808, -3, 0), x_dir=(0, 0, 1), z_dir=(-0.5000000000000001, -0.8660254037844387, 0)), Plane(origin=(-6.350852961, -17, 0), x_dir=(0, 0, 1), z_dir=(1, 0, 0))) as fillet1_piece_9:
        with BuildLine():
            CenterArc((FILLET1_R, -FILLET1_R), FILLET1_R, 90, 90)
            Line((0, -FILLET1_R), (0, 0))
            Line((0, 0), (FILLET1_R, 0))
        make_face()
    extrude(amount=12.701705922, mode=Mode.SUBTRACT)
    with BuildSketch(Plane(origin=(8.082903769, -14, 10), x_dir=(0, 0, -1), z_dir=(-0.5000000000000001, 0.8660254037844387, 0)), Plane(origin=(-6.350852961, -17, 10), x_dir=(0, 0, -1), z_dir=(1, 0, 0)), Plane(origin=(-1.732050808, -3, 10), x_dir=(0, 0, -1), z_dir=(-0.5000000000000001, -0.8660254037844387, 0))) as fillet1_piece_10:
        with BuildLine():
            CenterArc((FILLET1_R, FILLET1_R), FILLET1_R, 180, 90)
            Line((0, FILLET1_R), (0, 0))
            Line((0, 0), (FILLET1_R, 0))
        make_face()
    extrude(amount=12.701705922, mode=Mode.SUBTRACT)
    with BuildSketch(Plane(origin=(-0.216174522, -9.852596625, 10), x_dir=(-0.7848692976014117, -0.6196613475783904, 0), z_dir=(-0.6196613475783904, 0.7848692976014117, 0))) as fillet1_piece_11:
        with BuildLine():
            CenterArc((7.266210713, -2), FILLET1_R, 90, 60)
            Line((5.534159905, -1), (5.534159905, 0))
            Line((5.534159905, 0), (7.266210713, 0))
        make_face()
    revolve(axis=Axis((-0.216174522, -9.852596625, 10), (0, 0, 1)), revolution_arc=103.417183009, mode=Mode.SUBTRACT)
    with BuildSketch(Plane(origin=(3.77736534, -13.005532152, 10), x_dir=(0.7848692976014108, -0.6196613475783915, 0), z_dir=(-0.6196613475783915, -0.7848692976014108, 0))) as fillet1_piece_12:
        with BuildLine():
            CenterArc((2.178051609, -2), FILLET1_R, 90, 60)
            Line((0.446000801, -1), (0.446000801, 0))
            Line((0.446000801, 0), (2.178051609, 0))
        make_face()
    revolve(axis=Axis((3.77736534, -13.005532152, 10), (0, 0, 1)), revolution_arc=180, mode=Mode.SUBTRACT)
    with BuildSketch(Plane(origin=(-0.216174522, -9.852596625, 10), x_dir=(0.7848692976014113, -0.6196613475783908, 0), z_dir=(0.6196613475783908, 0.7848692976014113, 0))) as fillet1_piece_13:
        with BuildLine():
            CenterArc((2.910107495, 2), FILLET1_R, 270, 60)
            Line((4.642158302, 1), (4.642158302, 0))
            Line((4.642158302, 0), (2.910107495, 0))
        make_face()
    revolve(axis=Axis((-0.216174522, -9.852596625, 10), (0, 0, -1)), revolution_arc=103.417183009, mode=Mode.SUBTRACT)
    with BuildSketch(Plane(origin=(-4.209714384, -13.005532152, 10), x_dir=(0.7848692976014146, 0.6196613475783866, 0), z_dir=(0.6196613475783866, -0.7848692976014146, 0))) as fillet1_piece_14:
        with BuildLine():
            CenterArc((2.178051609, -2), FILLET1_R, 90, 60)
            Line((0.446000801, -1), (0.446000801, 0))
            Line((0.446000801, 0), (2.178051609, 0))
        make_face()
    revolve(axis=Axis((-4.209714384, -13.005532152, 10), (0, 0, 1)), revolution_arc=180, mode=Mode.SUBTRACT)

    # Sketch3 → Cut-Extrude2 (cut)
    # profile 1 of 2: a face of its own
    with BuildSketch(Plane.XY.offset(10)):
        with Locations((1.5, -8)):
            Circle(SKETCH3_R)
        with Locations((1.5, -8)):
            Circle(SKETCH3_R_2, mode=Mode.SUBTRACT)
    # profile 2 of 2: a face of its own
    with BuildSketch(Plane.XY.offset(10)):
        with Locations(Location((-1.5, -8, 0), (0, 0, 94.109031583))):
            Circle(SKETCH3_R)
        with Locations((-1.5, -8)):
            Circle(SKETCH3_R_2, mode=Mode.SUBTRACT)
    extrude(amount=-CUT_EXTRUDE2_DEPTH, mode=Mode.SUBTRACT)

    # Sketch4 → Boss-Extrude2 (add)
    with BuildSketch(Plane.XZ.offset(17)):
        with BuildLine():
            Line((-4, 5.9), (4, 5.9))
            ThreePointArc((4, 5.9), (4.9, 5), (4, 4.1))
            Line((4, 4.1), (-4, 4.1))
            ThreePointArc((-4, 4.1), (-4.9, 5), (-4, 5.9))
        make_face()
    extrude(amount=BOSS_EXTRUDE2_DEPTH)


solid = part.part
